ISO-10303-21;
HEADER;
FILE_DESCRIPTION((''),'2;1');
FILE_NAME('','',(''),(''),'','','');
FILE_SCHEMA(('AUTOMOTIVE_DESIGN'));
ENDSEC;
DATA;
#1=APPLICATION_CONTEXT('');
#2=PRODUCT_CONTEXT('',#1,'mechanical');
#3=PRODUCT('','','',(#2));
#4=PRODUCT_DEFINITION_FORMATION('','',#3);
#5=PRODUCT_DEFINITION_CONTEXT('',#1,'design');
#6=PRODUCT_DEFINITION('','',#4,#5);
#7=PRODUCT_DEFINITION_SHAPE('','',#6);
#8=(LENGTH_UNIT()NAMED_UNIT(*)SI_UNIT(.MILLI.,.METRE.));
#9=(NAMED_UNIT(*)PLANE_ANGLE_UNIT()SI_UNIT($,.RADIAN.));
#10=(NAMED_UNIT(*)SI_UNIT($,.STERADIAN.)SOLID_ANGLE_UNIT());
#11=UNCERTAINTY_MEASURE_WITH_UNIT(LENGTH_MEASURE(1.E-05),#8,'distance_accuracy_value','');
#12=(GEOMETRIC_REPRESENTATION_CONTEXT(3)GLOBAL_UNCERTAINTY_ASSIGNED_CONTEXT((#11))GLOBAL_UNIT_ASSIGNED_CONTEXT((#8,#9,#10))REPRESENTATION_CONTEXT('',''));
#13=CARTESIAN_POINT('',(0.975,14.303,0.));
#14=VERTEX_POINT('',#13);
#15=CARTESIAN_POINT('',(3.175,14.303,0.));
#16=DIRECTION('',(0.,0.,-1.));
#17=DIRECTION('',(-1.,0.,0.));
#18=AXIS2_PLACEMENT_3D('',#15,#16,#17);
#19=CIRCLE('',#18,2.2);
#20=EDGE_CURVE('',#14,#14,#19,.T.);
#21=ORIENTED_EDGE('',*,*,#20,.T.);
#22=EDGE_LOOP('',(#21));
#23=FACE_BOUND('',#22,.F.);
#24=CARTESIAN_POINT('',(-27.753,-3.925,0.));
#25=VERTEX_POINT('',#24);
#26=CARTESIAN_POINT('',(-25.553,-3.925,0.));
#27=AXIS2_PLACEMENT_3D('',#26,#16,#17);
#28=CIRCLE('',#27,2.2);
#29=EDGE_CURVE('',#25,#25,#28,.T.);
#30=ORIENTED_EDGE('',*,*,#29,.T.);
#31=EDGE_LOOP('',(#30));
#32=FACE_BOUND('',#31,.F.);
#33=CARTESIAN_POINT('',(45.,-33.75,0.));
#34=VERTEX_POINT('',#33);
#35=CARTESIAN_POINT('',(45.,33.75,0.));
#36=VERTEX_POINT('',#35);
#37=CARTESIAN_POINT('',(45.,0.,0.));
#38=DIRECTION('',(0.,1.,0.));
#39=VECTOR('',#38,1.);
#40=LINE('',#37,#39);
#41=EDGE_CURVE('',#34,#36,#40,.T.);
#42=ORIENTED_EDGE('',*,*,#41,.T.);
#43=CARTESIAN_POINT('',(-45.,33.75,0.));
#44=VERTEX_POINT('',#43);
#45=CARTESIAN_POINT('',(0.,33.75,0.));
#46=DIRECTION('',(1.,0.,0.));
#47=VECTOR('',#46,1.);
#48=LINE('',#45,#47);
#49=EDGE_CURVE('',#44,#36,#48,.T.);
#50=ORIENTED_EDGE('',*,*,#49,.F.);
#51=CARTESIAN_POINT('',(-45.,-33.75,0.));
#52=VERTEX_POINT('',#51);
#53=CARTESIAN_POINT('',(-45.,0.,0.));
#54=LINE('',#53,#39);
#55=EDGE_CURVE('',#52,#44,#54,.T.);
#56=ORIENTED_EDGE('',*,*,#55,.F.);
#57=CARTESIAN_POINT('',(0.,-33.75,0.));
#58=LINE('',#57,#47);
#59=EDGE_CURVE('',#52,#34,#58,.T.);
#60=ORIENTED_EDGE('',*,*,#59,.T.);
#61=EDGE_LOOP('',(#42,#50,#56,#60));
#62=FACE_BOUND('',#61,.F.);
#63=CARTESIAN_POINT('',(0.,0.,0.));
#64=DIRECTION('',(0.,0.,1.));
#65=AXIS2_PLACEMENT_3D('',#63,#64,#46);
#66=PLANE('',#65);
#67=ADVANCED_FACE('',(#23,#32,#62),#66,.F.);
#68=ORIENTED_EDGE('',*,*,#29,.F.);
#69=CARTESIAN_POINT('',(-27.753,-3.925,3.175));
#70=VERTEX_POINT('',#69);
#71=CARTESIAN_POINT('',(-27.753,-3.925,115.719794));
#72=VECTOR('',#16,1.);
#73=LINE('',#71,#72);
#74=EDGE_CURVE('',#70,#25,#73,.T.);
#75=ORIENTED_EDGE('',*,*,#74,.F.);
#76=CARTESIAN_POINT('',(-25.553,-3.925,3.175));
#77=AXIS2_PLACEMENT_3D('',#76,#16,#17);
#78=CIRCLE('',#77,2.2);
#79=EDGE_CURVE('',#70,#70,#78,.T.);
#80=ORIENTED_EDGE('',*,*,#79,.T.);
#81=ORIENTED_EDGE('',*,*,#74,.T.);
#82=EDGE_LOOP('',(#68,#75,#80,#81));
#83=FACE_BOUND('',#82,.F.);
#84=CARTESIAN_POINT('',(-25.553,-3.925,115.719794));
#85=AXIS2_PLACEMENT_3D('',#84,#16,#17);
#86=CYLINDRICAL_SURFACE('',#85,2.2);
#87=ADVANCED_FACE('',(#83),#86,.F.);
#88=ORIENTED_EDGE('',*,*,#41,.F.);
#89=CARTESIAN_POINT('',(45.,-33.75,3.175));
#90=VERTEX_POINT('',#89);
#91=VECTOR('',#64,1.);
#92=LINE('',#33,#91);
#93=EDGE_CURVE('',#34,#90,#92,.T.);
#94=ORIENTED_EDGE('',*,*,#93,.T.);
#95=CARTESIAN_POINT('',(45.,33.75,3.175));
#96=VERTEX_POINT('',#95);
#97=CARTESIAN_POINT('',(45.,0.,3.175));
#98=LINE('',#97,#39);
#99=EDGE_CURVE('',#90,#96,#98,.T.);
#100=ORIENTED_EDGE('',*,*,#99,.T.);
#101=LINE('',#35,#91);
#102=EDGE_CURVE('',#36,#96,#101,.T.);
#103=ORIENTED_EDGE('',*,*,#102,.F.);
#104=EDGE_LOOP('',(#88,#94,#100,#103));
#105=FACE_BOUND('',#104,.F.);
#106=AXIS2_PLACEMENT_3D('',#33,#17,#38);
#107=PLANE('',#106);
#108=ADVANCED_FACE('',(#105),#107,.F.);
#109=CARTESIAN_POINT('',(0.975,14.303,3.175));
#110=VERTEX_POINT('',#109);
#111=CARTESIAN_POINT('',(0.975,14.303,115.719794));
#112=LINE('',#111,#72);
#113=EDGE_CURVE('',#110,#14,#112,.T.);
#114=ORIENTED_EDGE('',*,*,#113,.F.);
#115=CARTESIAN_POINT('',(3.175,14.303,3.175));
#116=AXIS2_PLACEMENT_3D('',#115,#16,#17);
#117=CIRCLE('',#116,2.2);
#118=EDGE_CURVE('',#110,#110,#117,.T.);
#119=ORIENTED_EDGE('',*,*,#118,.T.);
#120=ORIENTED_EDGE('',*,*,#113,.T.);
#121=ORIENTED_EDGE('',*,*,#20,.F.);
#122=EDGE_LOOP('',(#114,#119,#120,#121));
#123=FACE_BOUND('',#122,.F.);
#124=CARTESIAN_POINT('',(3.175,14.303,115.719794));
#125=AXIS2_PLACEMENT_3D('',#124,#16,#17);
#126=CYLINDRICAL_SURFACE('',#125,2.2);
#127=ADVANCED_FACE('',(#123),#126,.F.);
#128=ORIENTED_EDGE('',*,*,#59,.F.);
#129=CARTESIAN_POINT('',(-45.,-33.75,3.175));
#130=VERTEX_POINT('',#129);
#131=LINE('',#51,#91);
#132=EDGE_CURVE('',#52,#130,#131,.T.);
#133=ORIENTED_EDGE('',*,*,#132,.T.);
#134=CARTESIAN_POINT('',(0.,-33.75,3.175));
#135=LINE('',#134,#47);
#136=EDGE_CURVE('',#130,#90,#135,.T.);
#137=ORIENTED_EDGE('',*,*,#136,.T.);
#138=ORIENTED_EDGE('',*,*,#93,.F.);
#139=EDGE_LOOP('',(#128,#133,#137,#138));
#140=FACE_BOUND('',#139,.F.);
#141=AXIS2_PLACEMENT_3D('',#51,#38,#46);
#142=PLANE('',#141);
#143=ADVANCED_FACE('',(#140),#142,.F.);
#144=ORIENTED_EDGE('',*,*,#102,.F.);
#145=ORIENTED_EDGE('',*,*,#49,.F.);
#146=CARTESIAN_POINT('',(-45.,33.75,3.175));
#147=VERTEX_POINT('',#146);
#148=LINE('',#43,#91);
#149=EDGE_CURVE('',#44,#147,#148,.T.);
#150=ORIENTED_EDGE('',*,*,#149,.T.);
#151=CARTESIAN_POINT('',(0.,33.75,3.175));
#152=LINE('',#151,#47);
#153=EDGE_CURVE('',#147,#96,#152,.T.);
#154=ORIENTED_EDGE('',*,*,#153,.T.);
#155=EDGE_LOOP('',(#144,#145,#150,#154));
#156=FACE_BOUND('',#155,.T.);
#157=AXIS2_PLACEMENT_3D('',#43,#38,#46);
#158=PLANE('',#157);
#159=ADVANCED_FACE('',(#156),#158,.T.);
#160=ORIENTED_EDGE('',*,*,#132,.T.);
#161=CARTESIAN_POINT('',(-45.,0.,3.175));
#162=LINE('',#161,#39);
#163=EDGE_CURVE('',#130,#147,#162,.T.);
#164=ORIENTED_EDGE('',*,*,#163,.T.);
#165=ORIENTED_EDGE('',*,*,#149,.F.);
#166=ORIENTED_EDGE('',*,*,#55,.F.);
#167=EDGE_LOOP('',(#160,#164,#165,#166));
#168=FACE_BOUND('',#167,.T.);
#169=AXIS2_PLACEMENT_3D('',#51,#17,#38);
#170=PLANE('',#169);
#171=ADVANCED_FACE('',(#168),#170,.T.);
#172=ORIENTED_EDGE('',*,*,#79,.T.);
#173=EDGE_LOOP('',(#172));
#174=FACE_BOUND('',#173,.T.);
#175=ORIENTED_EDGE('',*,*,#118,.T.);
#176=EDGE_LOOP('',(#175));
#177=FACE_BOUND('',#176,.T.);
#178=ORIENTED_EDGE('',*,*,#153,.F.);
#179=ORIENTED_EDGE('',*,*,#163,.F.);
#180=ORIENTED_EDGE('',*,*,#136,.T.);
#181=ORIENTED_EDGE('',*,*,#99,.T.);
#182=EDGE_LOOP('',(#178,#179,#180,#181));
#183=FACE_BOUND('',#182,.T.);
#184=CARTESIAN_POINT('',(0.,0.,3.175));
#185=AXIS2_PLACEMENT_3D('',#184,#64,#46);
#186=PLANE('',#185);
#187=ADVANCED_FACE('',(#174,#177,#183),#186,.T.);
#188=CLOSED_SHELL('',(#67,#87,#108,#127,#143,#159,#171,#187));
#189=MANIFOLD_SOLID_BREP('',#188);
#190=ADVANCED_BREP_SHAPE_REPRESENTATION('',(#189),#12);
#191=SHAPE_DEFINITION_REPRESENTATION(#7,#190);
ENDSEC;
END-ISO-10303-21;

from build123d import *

# Parameters (mm, degrees)
F0_W     = 90
F0_H     = 67.5
F1_DEPTH = 3.175
F3_D     = 4.4


# Not quite as in the source:
# - a length typed as a fraction of an inch, garbled in the dataset ("3 / 203.2 mm" for 3/8 in), is restored


with BuildPart() as f1:
    # F0 (on Top) → F1 (new body)
    with BuildSketch(Plane.XY):
        Rectangle(F0_W, F0_H)
    extrude(amount=F1_DEPTH)

    # F3 (through all)
    with Locations(Plane.XY.offset(3.175)):
        with Locations((-25.553, -3.925), (3.175, 14.303)):
            Hole(F3_D / 2)


solid = f1.part
